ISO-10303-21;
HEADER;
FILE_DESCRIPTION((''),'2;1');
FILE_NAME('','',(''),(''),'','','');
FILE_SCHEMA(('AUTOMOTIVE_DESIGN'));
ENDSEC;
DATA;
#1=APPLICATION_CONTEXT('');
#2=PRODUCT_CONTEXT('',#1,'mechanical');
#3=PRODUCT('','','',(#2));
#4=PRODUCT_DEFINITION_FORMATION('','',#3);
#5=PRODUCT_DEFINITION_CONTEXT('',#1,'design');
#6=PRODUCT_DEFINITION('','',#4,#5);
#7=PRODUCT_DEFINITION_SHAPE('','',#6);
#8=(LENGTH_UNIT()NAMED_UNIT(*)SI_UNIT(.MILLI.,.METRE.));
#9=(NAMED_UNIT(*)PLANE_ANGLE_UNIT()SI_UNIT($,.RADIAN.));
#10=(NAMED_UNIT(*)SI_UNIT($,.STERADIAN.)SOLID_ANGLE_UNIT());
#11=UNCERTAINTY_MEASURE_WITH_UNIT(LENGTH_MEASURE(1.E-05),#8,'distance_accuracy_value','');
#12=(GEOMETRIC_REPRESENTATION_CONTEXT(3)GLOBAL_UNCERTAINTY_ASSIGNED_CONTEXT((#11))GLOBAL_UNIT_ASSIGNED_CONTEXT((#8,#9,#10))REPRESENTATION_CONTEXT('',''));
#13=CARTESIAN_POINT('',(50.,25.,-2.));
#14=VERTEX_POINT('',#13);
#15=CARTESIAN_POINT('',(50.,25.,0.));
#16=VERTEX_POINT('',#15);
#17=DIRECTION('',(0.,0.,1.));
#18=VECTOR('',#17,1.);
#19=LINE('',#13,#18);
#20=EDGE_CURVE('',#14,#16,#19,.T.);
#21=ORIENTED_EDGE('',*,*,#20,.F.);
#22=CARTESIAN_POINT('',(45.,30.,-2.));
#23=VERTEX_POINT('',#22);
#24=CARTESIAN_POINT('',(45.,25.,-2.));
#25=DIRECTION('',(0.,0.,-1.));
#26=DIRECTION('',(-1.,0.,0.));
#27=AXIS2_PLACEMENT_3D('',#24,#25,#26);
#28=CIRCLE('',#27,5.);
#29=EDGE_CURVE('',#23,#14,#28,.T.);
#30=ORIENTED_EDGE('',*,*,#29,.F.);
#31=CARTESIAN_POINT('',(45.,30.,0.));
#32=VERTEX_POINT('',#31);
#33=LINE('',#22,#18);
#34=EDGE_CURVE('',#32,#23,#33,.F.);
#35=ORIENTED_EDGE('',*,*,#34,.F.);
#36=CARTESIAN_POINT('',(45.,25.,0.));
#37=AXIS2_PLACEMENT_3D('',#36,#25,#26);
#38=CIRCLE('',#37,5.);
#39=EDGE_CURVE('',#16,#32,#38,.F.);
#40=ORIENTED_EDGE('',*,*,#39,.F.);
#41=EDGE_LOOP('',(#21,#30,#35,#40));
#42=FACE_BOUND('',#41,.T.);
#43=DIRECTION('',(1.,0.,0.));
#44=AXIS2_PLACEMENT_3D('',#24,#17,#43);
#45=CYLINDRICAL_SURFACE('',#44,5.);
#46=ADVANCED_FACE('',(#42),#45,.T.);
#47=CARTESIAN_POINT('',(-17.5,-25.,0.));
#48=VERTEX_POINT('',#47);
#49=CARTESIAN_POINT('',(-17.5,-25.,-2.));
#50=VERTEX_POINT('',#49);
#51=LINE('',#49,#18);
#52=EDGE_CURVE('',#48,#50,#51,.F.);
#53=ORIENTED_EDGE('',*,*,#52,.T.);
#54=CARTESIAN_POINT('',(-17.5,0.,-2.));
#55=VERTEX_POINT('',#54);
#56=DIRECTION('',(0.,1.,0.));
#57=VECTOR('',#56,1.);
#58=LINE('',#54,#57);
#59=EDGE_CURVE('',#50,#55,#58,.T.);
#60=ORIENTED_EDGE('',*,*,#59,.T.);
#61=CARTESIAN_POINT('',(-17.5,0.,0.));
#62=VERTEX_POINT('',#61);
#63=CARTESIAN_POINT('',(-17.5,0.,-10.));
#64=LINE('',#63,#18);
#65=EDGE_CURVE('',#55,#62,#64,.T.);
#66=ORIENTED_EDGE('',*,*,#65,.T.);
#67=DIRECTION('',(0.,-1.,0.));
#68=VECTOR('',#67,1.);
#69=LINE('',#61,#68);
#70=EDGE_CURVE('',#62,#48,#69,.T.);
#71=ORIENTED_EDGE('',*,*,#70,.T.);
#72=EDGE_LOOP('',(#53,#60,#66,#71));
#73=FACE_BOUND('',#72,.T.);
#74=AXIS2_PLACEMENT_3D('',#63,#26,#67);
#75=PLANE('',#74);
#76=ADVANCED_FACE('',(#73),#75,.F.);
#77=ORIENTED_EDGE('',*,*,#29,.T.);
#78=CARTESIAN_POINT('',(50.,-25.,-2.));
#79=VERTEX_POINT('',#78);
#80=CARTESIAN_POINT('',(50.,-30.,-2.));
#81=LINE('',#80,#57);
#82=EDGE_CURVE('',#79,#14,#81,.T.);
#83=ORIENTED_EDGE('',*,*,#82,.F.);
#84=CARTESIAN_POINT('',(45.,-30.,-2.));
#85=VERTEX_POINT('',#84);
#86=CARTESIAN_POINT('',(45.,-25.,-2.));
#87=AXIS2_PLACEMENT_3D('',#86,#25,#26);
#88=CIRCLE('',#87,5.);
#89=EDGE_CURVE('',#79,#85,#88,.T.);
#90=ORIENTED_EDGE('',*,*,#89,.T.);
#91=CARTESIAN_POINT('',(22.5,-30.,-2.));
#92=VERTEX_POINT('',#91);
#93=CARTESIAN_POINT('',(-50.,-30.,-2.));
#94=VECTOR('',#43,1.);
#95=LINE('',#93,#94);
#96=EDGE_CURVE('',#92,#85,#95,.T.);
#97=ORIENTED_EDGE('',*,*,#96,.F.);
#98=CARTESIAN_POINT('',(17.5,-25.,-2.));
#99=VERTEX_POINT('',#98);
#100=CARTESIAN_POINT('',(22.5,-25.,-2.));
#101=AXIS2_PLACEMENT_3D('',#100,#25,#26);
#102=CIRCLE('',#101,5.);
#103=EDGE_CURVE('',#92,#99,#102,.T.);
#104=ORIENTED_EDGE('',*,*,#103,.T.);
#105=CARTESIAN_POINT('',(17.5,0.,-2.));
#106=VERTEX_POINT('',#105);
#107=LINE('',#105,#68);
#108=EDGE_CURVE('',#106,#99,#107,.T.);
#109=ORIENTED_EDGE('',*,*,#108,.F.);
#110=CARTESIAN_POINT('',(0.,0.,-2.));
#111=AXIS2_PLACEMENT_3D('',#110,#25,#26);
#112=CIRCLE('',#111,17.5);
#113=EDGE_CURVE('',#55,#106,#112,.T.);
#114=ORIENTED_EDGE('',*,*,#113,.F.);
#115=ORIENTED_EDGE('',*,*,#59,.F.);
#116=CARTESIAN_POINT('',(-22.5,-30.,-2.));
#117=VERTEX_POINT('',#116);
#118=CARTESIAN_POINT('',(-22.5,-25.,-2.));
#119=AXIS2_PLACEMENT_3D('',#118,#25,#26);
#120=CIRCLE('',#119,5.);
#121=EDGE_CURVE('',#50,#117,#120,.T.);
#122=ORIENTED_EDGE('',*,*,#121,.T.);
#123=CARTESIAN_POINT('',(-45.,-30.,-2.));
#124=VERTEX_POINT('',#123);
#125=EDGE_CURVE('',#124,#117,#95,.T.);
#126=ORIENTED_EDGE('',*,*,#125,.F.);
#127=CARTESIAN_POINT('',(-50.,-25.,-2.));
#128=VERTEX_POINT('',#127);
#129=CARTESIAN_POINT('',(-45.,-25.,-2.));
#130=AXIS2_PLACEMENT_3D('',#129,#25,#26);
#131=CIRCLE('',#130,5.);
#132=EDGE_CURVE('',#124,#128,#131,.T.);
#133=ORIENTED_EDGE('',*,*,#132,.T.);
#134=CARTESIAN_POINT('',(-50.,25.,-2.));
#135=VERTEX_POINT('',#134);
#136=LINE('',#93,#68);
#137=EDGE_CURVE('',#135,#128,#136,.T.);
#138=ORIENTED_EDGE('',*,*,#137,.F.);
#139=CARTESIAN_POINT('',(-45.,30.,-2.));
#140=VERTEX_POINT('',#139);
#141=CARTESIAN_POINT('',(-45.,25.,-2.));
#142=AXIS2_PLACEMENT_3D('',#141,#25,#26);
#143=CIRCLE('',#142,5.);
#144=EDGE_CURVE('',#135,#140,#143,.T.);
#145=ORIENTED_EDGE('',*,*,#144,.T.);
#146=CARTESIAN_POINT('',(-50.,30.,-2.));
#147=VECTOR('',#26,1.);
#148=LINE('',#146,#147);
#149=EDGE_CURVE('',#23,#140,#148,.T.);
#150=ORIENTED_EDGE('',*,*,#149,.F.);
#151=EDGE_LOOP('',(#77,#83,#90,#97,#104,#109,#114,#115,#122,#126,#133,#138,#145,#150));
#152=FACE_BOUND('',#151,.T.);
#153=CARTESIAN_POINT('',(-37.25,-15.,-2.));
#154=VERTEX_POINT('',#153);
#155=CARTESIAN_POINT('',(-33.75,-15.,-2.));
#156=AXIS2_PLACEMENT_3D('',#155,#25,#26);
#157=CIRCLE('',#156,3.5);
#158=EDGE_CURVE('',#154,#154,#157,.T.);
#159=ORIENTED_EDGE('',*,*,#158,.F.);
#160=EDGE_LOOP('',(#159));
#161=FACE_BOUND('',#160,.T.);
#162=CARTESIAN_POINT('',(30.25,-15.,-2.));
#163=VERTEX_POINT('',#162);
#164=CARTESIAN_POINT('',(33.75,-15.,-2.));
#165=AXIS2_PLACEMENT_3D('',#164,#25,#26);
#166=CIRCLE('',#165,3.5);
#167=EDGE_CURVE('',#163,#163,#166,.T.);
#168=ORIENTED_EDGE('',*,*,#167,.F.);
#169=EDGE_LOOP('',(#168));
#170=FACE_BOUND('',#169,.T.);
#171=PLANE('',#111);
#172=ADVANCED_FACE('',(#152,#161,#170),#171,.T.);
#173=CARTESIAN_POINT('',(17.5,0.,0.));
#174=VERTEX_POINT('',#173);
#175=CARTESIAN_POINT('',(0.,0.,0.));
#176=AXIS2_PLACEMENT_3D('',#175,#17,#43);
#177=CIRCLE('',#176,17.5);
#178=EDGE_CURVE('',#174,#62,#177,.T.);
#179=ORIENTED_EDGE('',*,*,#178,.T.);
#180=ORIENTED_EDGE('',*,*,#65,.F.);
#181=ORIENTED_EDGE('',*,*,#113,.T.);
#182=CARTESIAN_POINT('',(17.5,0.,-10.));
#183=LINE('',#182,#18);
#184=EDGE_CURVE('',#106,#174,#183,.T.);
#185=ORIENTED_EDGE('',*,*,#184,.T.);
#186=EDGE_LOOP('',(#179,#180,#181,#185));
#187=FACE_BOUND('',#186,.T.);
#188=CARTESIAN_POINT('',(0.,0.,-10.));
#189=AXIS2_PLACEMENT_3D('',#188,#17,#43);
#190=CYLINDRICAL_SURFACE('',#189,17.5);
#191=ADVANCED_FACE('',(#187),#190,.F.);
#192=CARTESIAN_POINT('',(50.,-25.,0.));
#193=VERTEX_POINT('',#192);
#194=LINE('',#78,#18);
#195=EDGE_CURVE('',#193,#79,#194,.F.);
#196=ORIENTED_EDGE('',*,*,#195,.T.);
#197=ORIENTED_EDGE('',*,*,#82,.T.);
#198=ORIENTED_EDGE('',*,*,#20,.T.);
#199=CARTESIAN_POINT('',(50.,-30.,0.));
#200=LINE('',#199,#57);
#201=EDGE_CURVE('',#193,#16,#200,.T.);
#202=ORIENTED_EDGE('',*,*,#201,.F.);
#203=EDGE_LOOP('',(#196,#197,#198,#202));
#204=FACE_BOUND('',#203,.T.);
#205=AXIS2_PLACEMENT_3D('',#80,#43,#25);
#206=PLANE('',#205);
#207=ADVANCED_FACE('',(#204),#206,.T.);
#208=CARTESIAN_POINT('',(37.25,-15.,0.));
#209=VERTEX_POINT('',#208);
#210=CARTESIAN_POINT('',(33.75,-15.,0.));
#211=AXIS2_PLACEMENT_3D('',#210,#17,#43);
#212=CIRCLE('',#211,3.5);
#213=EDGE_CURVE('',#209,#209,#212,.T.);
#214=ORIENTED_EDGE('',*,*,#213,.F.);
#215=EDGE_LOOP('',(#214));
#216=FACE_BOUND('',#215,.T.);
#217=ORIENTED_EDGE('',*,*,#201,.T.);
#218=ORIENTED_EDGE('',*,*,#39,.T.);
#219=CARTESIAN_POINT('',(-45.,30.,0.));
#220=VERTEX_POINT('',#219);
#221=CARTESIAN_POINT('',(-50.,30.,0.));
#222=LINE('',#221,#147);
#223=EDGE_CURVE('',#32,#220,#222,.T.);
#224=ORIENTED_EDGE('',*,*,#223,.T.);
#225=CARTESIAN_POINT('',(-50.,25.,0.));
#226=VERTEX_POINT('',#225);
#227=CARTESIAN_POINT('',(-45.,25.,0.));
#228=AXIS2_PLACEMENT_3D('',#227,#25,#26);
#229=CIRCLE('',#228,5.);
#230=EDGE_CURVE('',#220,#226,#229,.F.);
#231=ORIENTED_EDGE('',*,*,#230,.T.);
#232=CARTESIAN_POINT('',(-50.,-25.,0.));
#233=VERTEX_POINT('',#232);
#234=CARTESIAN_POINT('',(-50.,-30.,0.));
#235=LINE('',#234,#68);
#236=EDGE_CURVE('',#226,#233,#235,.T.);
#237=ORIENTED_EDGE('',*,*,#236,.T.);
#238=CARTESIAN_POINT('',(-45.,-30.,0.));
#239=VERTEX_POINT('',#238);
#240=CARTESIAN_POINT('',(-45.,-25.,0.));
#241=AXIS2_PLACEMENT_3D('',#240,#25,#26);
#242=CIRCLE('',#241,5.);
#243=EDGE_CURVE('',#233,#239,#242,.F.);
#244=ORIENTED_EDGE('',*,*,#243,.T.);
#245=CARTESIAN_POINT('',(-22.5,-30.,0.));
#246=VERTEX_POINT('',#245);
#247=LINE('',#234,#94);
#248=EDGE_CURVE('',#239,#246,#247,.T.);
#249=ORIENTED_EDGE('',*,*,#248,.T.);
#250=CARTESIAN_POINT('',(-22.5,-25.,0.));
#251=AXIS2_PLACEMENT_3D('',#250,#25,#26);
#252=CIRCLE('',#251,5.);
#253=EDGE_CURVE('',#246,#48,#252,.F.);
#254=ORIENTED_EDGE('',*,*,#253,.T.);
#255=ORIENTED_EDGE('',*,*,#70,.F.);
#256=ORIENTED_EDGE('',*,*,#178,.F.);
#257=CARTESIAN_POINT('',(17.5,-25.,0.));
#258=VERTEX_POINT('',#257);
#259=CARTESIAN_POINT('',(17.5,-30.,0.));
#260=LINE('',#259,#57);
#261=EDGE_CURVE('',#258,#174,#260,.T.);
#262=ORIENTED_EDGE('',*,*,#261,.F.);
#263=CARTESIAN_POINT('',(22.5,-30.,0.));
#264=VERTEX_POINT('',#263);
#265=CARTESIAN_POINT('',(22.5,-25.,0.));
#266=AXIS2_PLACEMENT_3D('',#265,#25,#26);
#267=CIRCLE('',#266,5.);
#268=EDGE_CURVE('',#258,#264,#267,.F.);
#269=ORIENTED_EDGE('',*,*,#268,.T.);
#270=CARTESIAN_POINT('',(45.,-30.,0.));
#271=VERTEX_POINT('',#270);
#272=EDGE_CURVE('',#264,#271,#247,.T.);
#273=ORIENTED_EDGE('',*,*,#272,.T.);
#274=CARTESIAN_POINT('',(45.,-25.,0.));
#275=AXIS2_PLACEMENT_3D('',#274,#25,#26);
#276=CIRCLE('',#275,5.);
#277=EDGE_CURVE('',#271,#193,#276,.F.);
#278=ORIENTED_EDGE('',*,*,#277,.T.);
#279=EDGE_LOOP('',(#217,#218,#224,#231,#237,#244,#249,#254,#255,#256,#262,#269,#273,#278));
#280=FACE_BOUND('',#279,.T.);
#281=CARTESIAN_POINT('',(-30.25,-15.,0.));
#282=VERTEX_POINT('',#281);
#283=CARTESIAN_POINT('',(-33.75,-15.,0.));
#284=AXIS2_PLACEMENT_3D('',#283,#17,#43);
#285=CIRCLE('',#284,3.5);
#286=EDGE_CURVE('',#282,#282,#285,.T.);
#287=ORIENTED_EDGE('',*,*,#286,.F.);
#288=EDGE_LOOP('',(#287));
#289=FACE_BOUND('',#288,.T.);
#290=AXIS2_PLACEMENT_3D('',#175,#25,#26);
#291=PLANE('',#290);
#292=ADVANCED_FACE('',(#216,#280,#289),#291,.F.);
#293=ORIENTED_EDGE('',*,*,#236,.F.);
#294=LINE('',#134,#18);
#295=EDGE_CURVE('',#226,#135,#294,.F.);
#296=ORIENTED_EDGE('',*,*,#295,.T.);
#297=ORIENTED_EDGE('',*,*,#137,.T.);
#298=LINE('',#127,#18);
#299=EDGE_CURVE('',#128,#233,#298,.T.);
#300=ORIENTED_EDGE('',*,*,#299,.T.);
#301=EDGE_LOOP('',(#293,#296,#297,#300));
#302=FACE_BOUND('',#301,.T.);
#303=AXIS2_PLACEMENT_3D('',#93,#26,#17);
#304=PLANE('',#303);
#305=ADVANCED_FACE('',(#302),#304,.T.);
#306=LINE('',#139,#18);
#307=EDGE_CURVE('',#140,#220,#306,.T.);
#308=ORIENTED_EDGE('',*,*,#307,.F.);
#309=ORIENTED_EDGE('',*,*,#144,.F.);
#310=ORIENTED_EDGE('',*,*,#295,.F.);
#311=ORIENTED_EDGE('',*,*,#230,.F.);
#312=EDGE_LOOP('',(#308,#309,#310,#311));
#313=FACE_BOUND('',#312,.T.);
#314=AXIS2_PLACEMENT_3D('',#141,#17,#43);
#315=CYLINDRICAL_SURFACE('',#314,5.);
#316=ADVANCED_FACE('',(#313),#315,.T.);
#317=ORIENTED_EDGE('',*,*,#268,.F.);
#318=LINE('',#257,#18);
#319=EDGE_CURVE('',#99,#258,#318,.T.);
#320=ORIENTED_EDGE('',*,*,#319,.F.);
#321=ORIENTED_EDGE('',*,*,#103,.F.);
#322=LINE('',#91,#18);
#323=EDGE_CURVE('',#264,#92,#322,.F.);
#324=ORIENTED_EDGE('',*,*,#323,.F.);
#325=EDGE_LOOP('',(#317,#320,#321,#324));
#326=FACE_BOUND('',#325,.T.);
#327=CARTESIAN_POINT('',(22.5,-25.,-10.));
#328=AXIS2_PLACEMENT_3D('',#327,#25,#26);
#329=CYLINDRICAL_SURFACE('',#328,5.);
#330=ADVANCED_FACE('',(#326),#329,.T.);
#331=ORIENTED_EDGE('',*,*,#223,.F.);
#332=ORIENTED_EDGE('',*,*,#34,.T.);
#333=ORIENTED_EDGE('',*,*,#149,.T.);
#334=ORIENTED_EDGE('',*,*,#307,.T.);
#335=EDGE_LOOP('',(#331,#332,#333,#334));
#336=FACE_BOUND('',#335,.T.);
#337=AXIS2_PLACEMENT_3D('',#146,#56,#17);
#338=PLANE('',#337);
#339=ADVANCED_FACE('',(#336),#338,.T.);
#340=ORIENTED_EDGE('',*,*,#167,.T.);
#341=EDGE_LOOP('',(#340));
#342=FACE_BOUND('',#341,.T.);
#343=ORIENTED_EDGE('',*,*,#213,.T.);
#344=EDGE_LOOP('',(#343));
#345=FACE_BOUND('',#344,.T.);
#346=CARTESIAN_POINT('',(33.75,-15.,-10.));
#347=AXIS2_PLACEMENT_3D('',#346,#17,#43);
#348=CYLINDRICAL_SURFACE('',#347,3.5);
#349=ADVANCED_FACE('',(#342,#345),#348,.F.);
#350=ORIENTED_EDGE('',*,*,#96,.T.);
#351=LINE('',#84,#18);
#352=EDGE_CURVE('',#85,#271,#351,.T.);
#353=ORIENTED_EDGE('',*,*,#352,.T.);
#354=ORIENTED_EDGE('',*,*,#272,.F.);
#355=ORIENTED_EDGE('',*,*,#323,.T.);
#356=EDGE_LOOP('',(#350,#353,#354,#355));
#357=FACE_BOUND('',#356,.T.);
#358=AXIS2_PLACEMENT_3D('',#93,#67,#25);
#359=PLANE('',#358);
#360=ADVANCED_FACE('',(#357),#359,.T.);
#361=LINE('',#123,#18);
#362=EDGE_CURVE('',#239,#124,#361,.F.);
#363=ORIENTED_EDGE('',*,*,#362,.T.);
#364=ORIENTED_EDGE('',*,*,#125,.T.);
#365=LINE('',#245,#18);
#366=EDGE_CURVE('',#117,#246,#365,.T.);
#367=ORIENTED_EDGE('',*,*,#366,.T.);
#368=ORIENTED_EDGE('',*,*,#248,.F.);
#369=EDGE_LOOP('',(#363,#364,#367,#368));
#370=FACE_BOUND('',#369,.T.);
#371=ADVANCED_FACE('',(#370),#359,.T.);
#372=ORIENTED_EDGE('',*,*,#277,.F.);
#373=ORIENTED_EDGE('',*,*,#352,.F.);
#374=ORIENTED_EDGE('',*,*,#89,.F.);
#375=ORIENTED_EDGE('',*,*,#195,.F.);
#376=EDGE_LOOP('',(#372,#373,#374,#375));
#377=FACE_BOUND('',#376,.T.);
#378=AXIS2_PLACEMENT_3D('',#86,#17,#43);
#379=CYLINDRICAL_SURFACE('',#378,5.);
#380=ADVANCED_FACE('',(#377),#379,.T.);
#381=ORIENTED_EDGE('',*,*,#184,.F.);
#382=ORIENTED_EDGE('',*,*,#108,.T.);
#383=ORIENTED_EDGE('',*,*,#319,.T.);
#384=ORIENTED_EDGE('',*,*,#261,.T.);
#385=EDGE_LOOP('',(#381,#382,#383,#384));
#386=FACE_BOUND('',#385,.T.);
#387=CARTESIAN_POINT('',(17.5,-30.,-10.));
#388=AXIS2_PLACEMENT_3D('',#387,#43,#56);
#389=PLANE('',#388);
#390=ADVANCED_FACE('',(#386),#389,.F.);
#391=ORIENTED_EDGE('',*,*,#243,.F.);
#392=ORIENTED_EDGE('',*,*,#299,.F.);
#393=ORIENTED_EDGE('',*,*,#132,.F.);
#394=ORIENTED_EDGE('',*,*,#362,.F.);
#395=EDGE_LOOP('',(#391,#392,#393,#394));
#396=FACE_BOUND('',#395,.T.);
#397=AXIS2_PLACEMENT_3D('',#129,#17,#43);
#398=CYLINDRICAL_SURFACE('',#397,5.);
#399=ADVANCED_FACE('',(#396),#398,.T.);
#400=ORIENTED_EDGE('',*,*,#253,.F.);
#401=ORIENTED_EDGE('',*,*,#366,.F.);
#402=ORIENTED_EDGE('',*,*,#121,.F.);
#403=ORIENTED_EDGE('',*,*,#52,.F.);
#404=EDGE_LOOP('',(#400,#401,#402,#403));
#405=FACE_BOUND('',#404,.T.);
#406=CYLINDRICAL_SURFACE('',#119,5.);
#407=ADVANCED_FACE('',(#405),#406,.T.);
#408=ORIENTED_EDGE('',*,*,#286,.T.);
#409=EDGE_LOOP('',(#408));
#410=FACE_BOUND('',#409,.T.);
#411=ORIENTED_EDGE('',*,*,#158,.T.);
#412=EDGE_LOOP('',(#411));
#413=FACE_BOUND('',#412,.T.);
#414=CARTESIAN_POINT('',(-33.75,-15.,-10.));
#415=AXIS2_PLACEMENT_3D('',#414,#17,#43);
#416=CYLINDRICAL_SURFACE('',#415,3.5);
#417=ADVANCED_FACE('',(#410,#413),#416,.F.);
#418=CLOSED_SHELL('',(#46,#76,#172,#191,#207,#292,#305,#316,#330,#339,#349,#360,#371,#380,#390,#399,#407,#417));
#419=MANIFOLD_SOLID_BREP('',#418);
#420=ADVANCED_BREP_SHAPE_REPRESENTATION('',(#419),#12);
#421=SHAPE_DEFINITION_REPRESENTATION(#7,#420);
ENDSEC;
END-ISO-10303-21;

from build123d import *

# Parameters (mm, degrees)
SKETCH1_W          = 100
SKETCH1_H          = 60
BASE_FLANGE1_DEPTH = 2
CUT_EXTRUDE1_DEPTH = 10
FILLET1_R          = 5
SKETCH7_R          = 3.5
CUT_EXTRUDE2_DEPTH = 10
FILLET2_R          = 5


# Sheet-metal steps are written as plain solids
with BuildPart() as part:
    # Sketch1 → Base-Flange1 (new body)
    with BuildSketch(Plane.XY):
        Rectangle(SKETCH1_W, SKETCH1_H)
    extrude(amount=-BASE_FLANGE1_DEPTH)

    # Sketch6 → Cut-Extrude1 (cut)
    with BuildSketch(Plane.XY):
        with BuildLine():
            Line((-17.5, 0), (-17.5, -30))
            Line((-17.5, -30), (17.5, -30))
            Line((17.5, -30), (17.5, 0))
            ThreePointArc((17.5, 0), (0, 17.5), (-17.5, 0))
        make_face()
    extrude(amount=-CUT_EXTRUDE1_DEPTH, mode=Mode.SUBTRACT)

    # Fillet1
    fillet1_edges = [part.edges().sort_by_distance(p)[0] for p in [
        (17.5, -30, -1),
        (50, -30, -1),
        (-50, -30, -1),
        (-50, 30, -1),
        (50, 30, -1),
    ]]
    fillet(fillet1_edges, radius=FILLET1_R)

    # Sketch7 → Cut-Extrude2 (cut)
    with BuildSketch(Plane.XY):
        with Locations((-33.75, -15)):
            Circle(SKETCH7_R)
        with Locations((33.75, -15)):
            Circle(SKETCH7_R)
    extrude(amount=-CUT_EXTRUDE2_DEPTH, mode=Mode.SUBTRACT)

    # Fillet2
    fillet2_edges = [part.edges().sort_by_distance(p)[0] for p in [
        (-17.5, -30, -1),
    ]]
    fillet(fillet2_edges, radius=FILLET2_R)


solid = part.part
